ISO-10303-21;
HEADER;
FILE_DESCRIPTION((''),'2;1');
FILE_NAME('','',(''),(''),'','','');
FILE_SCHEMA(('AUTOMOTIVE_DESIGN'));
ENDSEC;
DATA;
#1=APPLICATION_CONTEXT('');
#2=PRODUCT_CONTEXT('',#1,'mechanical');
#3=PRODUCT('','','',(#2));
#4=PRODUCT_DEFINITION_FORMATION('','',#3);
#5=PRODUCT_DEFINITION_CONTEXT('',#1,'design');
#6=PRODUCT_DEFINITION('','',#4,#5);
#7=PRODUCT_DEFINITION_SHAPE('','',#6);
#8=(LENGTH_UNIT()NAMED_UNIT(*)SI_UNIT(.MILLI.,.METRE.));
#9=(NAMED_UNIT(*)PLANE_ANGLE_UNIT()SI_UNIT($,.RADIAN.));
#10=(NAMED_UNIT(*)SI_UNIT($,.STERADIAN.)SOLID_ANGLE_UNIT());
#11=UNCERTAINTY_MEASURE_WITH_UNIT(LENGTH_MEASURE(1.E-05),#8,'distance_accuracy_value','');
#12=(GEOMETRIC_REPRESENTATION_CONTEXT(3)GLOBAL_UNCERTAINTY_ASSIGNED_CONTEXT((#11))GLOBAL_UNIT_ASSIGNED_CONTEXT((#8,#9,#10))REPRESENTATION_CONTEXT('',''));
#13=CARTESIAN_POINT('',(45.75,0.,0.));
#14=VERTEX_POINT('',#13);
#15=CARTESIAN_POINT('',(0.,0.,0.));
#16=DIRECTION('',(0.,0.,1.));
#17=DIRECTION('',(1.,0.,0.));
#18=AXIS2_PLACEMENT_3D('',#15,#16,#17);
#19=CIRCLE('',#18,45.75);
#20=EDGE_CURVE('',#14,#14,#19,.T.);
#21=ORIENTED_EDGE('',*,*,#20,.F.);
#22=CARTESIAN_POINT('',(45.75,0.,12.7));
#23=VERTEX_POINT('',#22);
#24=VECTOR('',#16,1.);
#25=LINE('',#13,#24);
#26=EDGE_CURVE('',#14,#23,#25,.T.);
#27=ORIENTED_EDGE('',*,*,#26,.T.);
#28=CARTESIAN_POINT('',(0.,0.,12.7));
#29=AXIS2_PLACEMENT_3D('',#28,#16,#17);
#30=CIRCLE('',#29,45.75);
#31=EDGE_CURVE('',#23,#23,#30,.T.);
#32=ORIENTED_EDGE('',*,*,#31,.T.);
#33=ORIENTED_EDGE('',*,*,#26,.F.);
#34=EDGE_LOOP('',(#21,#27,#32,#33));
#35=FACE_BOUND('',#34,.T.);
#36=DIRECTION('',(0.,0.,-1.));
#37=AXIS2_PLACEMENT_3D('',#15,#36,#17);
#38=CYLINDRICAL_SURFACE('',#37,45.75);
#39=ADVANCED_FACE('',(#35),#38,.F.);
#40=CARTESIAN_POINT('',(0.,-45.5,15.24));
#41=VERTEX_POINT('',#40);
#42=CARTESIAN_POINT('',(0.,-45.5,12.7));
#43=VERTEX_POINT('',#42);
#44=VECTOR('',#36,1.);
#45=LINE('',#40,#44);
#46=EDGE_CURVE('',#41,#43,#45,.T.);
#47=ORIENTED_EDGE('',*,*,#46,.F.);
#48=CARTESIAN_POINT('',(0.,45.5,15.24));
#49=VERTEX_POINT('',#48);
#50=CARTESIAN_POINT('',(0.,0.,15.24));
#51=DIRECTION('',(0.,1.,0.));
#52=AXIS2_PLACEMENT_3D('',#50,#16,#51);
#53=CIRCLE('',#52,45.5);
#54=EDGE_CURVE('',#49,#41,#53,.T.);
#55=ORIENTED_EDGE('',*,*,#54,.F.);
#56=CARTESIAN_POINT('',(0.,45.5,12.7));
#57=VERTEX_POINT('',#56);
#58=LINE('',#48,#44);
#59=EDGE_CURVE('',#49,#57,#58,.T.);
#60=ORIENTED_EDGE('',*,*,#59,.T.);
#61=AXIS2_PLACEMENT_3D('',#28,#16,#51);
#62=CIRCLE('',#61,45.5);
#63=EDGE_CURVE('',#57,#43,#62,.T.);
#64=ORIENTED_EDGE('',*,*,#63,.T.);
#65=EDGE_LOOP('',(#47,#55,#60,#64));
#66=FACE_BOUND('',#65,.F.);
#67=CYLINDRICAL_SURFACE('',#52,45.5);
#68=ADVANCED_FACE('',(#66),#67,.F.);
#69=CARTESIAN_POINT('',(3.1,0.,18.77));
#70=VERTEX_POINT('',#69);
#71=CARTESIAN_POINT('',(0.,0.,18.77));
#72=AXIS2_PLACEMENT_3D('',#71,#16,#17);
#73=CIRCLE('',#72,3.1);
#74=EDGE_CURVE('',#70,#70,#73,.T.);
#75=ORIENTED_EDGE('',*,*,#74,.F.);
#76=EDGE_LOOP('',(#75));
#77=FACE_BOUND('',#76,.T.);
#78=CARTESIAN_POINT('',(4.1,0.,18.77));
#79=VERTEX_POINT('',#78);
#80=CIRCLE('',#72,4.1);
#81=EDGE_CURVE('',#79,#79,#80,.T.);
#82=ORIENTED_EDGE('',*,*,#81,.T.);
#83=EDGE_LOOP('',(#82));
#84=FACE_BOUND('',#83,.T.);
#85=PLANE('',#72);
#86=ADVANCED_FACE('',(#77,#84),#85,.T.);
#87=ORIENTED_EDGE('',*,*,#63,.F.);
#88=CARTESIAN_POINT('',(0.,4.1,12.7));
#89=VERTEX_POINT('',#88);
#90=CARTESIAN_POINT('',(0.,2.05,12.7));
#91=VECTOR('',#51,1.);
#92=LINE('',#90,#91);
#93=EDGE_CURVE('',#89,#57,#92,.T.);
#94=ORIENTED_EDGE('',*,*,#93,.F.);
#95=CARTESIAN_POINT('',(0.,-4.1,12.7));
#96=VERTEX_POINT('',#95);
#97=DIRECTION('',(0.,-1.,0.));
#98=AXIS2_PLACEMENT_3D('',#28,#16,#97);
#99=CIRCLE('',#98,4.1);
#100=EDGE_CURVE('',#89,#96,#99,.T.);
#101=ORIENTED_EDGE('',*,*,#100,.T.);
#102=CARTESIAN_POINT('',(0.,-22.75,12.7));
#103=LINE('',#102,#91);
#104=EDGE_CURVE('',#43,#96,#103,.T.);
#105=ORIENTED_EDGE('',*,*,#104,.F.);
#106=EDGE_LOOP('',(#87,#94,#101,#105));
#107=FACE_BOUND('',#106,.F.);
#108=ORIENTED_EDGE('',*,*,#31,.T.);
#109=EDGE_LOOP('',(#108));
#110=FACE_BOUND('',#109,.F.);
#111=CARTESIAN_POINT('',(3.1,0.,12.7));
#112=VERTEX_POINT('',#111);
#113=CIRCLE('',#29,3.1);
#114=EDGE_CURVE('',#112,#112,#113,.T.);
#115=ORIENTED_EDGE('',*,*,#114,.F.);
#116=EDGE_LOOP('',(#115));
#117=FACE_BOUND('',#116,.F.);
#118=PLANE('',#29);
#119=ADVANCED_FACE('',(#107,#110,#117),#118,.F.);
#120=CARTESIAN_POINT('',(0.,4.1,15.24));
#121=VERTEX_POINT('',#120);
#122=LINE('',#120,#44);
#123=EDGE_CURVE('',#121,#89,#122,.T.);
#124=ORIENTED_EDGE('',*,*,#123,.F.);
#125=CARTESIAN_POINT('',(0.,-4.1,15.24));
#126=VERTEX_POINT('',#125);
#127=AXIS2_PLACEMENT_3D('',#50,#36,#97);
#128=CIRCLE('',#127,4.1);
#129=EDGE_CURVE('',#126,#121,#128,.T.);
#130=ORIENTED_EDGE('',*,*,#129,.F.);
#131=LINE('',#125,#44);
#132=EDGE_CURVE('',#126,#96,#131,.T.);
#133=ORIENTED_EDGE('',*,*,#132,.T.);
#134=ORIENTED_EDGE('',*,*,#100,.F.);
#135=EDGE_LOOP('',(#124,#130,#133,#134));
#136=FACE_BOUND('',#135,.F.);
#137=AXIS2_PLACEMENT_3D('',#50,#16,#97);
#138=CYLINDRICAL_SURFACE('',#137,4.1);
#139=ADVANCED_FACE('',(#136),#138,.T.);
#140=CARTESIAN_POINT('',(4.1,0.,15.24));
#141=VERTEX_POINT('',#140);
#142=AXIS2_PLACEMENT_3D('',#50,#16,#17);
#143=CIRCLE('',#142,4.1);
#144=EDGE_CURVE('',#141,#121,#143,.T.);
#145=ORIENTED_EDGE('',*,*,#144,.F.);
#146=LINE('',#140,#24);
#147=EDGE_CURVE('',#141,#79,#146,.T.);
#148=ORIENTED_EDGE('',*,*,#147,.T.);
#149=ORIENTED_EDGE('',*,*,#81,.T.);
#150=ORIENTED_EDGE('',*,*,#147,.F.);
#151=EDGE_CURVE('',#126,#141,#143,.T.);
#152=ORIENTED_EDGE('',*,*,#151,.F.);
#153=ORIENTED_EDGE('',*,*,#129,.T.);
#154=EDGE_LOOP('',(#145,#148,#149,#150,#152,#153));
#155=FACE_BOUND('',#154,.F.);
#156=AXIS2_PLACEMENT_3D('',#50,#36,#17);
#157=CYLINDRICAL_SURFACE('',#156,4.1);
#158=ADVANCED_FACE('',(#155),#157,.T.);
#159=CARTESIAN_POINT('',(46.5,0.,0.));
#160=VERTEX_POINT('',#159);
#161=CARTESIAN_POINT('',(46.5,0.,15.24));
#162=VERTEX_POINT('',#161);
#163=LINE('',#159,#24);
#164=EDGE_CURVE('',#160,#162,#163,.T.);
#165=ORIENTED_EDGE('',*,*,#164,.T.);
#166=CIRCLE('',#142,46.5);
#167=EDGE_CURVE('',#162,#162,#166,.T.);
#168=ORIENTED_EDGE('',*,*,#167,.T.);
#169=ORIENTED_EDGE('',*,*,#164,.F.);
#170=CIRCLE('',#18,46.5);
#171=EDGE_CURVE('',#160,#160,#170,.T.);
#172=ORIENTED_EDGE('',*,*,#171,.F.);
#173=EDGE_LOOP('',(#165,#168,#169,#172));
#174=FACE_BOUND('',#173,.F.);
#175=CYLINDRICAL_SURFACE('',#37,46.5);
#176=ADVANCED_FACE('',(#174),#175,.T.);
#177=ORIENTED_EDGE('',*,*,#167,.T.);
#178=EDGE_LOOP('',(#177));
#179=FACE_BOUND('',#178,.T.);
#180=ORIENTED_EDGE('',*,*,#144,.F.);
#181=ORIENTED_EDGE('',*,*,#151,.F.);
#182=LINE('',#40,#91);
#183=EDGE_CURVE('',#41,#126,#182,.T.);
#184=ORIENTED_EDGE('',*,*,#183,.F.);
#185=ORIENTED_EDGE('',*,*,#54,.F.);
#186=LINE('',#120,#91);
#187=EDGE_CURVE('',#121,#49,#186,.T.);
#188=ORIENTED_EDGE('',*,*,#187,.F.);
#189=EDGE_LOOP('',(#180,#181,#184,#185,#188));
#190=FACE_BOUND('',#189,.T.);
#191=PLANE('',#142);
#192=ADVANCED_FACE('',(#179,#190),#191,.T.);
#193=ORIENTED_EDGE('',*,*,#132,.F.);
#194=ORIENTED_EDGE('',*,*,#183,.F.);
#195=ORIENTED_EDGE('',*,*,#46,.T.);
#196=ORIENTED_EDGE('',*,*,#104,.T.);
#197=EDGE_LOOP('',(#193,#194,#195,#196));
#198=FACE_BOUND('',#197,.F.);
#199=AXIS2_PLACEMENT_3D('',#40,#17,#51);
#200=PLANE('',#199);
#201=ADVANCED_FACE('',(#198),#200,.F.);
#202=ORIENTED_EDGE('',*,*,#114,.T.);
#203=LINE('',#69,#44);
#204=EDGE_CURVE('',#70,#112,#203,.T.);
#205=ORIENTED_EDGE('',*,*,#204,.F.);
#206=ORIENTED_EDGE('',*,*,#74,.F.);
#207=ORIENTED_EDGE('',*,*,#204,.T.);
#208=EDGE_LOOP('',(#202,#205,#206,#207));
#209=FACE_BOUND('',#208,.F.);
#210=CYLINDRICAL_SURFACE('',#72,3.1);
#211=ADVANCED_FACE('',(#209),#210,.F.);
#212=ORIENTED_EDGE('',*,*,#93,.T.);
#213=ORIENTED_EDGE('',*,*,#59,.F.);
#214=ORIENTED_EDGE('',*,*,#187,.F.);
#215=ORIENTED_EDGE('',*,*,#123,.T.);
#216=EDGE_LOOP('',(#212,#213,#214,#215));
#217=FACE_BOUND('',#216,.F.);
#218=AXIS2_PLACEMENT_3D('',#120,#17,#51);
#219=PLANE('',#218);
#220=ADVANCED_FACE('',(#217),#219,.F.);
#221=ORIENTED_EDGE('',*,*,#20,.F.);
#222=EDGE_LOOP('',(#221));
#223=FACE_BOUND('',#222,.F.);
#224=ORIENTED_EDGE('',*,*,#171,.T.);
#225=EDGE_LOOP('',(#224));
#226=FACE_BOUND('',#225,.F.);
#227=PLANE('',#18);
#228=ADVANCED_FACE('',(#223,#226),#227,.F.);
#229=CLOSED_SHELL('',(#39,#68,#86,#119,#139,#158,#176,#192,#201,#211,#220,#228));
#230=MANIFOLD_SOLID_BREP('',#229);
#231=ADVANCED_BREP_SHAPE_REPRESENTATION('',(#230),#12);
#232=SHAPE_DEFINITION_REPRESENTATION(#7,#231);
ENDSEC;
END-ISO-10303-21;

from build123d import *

# Parameters (mm, degrees)
F0_R          = 46.5
F1_DEPTH      = 15.24
F2_R          = 45.75
F3_DEPTH      = 12.7
F4_R          = 4.1
F5_DEPTH      = 3.53
F5_DEPTH_BACK = 1
F7_R          = 3.1
F8_DEPTH      = 18.771
F9_DEPTH      = 15.241


# Not quite as in the source:
# - after a boolean that leaves OpenCascade's solid faulty, fix() repairs it


with BuildPart() as f1:
    # F0 (on Top) → F1 (new body)
    with BuildSketch(Plane.XY):
        Circle(F0_R)
    extrude(amount=F1_DEPTH)

    # F2 (on Top) → F3 (cut)
    with BuildSketch(Plane.XY):
        Circle(F2_R)
    extrude(amount=F3_DEPTH, mode=Mode.SUBTRACT)

    # F4 (on face) → F5 (join, two sides)
    with BuildSketch(Plane.XY.offset(15.24)) as f5_sk:
        Circle(F4_R)
    extrude(amount=F5_DEPTH)
    extrude(f5_sk.sketch, amount=-F5_DEPTH_BACK)

    # F7 (on face) → F8 (cut, through all)
    with BuildSketch(Plane.XY.offset(18.77)):
        Circle(F7_R)
    extrude(amount=-F8_DEPTH, mode=Mode.SUBTRACT)

    # F6 (on face) → F9 (cut, through all)
    with BuildSketch(Plane.XY.offset(15.24)):
        with BuildLine():
            Line((0, 4.1), (0, 45.5))
            ThreePointArc((0, 45.5), (-45.5, 0), (0, -45.5))
            Line((0, -45.5), (0, -4.1))
            ThreePointArc((0, -4.1), (-4.1, 0), (0, 4.1))
        make_face()
    extrude(amount=-F9_DEPTH, mode=Mode.SUBTRACT)

    add(f1.part.fix(), mode=Mode.REPLACE)


solid = f1.part
